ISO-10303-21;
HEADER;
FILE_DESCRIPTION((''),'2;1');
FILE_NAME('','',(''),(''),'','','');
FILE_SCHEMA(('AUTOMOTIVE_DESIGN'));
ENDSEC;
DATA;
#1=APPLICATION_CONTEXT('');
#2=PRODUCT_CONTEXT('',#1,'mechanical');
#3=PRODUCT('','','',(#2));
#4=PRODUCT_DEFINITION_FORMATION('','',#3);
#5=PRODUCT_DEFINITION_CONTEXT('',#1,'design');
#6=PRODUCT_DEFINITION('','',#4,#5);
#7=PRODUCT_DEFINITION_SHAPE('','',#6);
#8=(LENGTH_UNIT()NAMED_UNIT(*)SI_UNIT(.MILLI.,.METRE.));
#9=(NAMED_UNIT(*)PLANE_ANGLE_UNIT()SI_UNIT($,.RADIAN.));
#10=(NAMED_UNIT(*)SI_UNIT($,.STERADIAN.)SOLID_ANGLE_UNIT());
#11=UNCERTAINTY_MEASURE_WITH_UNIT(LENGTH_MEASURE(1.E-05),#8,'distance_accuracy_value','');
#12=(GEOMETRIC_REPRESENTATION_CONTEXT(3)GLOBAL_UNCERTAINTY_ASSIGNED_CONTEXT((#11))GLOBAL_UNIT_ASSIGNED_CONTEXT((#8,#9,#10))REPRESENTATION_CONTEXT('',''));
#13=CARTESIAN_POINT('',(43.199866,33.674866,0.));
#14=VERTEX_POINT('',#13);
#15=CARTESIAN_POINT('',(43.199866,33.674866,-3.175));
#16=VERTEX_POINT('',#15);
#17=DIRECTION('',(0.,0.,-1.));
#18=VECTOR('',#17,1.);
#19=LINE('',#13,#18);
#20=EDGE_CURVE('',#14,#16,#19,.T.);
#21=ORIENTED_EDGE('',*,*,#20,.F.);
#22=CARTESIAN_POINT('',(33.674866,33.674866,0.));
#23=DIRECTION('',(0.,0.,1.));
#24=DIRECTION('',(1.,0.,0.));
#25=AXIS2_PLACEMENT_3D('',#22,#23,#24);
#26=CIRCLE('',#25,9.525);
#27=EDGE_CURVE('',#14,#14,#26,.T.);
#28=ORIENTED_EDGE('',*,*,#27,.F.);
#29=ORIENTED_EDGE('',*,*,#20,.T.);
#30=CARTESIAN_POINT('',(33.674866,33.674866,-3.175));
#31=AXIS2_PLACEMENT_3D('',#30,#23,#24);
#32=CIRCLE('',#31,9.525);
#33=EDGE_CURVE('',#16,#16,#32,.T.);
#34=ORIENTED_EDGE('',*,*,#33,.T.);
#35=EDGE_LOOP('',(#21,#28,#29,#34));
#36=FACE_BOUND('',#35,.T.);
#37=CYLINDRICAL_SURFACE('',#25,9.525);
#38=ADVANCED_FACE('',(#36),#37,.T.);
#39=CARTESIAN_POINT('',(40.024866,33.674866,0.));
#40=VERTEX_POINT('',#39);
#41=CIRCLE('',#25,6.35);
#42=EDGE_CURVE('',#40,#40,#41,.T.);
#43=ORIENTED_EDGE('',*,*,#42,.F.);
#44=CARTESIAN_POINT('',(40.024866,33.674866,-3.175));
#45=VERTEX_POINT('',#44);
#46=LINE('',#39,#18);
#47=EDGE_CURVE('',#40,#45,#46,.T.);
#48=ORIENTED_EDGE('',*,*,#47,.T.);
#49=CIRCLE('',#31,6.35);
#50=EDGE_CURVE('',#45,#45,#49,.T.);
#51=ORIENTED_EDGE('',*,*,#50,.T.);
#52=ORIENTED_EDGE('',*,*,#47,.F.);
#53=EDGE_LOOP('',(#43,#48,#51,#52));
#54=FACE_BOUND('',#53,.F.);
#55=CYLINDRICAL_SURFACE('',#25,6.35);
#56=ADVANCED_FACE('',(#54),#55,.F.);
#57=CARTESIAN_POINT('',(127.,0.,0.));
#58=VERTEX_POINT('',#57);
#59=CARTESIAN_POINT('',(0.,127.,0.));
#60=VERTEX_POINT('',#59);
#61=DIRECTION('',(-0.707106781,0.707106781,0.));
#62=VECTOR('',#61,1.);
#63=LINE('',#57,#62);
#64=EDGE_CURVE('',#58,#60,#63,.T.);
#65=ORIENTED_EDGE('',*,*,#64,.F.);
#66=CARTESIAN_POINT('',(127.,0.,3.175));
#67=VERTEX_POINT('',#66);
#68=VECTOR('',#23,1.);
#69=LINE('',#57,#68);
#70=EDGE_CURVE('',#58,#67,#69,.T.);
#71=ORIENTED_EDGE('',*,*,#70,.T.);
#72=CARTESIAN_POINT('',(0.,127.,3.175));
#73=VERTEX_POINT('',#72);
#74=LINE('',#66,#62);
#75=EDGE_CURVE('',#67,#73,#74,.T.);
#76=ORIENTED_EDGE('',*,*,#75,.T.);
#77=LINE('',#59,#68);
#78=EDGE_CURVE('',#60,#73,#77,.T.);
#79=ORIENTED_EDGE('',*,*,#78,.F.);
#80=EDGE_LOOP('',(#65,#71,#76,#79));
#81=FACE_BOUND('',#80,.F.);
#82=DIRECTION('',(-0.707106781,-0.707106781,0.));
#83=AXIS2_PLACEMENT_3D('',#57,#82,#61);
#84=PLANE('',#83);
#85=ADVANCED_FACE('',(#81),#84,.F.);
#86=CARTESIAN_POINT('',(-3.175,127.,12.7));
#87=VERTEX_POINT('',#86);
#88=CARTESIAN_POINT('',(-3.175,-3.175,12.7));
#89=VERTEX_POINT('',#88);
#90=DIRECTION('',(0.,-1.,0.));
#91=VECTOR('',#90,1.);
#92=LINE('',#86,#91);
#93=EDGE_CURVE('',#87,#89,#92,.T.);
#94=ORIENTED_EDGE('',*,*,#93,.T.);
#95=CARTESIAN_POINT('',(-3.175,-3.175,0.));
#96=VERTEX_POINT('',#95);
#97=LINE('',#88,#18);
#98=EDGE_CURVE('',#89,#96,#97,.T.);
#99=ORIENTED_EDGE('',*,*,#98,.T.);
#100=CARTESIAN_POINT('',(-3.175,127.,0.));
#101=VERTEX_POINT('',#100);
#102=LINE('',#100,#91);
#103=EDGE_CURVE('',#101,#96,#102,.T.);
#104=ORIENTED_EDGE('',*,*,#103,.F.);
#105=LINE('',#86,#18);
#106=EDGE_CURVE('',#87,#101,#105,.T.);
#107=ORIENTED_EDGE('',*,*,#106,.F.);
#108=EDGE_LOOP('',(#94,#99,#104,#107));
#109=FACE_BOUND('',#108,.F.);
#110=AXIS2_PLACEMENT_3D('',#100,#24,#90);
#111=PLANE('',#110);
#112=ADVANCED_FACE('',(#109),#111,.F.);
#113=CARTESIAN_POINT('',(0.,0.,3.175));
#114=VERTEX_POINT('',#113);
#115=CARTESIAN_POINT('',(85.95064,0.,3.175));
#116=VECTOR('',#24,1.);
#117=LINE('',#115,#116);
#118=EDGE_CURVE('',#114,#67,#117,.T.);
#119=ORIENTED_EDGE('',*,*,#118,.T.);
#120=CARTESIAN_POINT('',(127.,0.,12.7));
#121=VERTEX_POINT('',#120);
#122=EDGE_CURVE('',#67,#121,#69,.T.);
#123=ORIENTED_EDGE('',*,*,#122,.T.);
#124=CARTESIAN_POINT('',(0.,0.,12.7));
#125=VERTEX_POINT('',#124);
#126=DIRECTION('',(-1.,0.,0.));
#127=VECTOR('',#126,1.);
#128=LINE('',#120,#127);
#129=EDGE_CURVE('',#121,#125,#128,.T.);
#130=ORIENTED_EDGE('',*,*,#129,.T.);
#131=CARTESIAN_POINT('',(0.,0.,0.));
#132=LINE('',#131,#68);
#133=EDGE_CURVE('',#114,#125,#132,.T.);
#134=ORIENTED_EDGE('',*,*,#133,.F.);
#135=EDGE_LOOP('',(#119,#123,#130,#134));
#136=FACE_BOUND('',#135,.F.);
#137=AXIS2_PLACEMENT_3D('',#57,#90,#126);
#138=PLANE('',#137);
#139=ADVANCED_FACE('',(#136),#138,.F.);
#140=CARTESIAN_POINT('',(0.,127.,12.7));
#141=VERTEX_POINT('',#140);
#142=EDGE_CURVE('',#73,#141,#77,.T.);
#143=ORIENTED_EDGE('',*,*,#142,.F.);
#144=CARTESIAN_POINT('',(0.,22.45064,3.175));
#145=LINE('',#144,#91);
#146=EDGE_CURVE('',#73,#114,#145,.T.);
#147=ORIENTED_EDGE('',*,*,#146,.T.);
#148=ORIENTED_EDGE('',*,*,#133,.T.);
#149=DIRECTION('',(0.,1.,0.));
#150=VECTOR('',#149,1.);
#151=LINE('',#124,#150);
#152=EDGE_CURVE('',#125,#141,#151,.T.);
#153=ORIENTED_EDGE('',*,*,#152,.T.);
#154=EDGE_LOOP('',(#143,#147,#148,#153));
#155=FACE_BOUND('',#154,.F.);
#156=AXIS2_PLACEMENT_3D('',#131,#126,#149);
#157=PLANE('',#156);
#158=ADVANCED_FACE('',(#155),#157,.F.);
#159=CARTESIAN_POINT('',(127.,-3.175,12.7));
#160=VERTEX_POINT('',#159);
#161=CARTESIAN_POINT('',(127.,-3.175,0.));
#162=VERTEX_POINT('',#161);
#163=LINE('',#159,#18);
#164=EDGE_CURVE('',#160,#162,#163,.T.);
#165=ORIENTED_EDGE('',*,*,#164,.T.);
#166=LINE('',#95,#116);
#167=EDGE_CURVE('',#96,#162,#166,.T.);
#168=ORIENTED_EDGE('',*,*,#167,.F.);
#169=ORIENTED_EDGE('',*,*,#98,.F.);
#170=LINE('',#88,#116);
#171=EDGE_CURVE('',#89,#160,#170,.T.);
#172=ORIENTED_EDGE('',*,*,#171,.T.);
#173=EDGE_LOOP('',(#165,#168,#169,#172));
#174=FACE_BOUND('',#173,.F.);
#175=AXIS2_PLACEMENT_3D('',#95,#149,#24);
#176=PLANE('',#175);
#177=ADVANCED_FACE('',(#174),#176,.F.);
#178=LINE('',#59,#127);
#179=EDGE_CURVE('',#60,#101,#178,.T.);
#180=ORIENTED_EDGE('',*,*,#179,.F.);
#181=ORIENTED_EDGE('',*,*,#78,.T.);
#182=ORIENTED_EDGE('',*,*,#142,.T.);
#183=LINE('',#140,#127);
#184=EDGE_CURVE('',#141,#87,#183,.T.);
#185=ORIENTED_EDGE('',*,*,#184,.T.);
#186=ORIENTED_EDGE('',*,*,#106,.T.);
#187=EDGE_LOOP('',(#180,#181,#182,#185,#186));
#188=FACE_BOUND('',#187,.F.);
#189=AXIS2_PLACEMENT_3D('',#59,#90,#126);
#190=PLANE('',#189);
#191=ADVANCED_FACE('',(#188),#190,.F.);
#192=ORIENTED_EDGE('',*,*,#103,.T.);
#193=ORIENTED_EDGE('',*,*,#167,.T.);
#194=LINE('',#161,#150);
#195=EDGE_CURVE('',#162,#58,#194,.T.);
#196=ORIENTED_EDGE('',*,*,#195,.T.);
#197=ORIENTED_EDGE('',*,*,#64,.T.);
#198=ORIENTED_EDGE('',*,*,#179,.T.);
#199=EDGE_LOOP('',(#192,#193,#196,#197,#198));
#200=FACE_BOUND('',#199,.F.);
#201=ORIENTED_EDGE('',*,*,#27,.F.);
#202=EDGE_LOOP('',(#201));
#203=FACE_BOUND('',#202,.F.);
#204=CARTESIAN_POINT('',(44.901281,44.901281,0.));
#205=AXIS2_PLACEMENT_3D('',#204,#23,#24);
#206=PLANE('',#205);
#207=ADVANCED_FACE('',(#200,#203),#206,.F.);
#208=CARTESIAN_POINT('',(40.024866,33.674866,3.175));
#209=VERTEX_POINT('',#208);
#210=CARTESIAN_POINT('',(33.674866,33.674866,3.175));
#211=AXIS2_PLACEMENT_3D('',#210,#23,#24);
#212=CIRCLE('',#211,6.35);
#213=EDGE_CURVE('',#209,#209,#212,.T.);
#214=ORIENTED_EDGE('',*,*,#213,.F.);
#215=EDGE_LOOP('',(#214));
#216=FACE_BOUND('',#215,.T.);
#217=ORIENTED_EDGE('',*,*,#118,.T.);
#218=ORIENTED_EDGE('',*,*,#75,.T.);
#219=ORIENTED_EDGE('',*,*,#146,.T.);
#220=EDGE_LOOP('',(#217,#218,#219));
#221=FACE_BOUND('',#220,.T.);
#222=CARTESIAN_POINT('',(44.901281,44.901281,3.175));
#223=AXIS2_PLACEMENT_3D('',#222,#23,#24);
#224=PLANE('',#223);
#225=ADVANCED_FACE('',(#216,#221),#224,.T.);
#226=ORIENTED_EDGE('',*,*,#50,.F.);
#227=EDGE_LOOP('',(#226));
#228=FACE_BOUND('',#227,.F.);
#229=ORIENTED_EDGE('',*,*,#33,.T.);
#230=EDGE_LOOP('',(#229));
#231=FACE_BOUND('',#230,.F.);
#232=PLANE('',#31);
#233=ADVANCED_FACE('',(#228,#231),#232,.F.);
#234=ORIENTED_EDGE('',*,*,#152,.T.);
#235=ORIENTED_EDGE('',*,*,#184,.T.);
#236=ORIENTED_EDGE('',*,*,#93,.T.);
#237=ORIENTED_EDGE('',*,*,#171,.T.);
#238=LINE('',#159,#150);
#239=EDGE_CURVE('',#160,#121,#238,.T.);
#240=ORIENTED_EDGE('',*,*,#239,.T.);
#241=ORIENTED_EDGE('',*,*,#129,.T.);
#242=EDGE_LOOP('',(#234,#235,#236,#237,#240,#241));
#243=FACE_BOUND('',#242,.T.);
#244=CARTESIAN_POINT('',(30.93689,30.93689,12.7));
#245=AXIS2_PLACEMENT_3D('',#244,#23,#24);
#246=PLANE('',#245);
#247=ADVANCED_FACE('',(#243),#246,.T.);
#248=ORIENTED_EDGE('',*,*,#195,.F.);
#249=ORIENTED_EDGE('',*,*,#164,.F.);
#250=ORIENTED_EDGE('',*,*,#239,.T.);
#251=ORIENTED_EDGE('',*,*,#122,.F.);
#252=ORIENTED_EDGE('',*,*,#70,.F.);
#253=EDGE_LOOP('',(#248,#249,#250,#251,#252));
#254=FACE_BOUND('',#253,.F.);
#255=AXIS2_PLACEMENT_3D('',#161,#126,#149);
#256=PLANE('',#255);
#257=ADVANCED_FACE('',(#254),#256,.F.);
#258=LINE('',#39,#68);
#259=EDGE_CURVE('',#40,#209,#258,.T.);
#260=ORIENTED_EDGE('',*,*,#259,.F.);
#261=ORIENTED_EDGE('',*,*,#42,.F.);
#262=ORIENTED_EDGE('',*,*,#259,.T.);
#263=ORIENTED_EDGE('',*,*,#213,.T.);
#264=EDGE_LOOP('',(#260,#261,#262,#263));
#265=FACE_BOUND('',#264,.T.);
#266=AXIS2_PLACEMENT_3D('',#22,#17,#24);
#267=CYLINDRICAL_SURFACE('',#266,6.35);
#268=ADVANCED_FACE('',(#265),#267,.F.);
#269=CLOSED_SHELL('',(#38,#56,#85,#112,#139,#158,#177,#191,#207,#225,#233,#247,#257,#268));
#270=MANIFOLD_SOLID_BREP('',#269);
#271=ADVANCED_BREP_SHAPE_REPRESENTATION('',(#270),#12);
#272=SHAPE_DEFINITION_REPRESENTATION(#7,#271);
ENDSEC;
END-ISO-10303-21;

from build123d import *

# Parameters (mm, degrees)
F0_R     = 9.525
F0_R_2   = 6.35
F1_DEPTH = 3.175
F2_DEPTH = 12.7
F3_DEPTH = 3.175


# Not quite as in the source:
# - a feature names something its author has since deleted; it is built from what else it names


with BuildPart() as f1:
    # F0 (on Top) → F1 (new body)
    with BuildSketch(Plane.XY):
        Polygon((0, 127), (0, 0), (127, 0), align=None)
        with Locations((33.6748659611, 33.6748659611)):
            Circle(F0_R, mode=Mode.SUBTRACT)
        Polygon((127, 0), (0, 0), (0, 127), (-3.175, 127), (-3.175, -3.175), (127, -3.175), align=None)
        with Locations((33.6748659611, 33.6748659611)):
            Circle(F0_R)
        with Locations((33.6748659611, 33.6748659611)):
            Circle(F0_R_2, mode=Mode.SUBTRACT)
    extrude(amount=F1_DEPTH)

    # F0 (on Top) → F2 (join)
    with BuildSketch(Plane.XY):
        Polygon((127, 0), (0, 0), (0, 127), (-3.175, 127), (-3.175, -3.175), (127, -3.175), align=None)
    extrude(amount=F2_DEPTH)

    # F0 (on Top) → F3 (join)
    with BuildSketch(Plane.XY):
        with Locations((33.6748659611, 33.6748659611)):
            Circle(F0_R)
        with Locations((33.6748659611, 33.6748659611)):
            Circle(F0_R_2, mode=Mode.SUBTRACT)
    extrude(amount=-F3_DEPTH)


solid = f1.part
